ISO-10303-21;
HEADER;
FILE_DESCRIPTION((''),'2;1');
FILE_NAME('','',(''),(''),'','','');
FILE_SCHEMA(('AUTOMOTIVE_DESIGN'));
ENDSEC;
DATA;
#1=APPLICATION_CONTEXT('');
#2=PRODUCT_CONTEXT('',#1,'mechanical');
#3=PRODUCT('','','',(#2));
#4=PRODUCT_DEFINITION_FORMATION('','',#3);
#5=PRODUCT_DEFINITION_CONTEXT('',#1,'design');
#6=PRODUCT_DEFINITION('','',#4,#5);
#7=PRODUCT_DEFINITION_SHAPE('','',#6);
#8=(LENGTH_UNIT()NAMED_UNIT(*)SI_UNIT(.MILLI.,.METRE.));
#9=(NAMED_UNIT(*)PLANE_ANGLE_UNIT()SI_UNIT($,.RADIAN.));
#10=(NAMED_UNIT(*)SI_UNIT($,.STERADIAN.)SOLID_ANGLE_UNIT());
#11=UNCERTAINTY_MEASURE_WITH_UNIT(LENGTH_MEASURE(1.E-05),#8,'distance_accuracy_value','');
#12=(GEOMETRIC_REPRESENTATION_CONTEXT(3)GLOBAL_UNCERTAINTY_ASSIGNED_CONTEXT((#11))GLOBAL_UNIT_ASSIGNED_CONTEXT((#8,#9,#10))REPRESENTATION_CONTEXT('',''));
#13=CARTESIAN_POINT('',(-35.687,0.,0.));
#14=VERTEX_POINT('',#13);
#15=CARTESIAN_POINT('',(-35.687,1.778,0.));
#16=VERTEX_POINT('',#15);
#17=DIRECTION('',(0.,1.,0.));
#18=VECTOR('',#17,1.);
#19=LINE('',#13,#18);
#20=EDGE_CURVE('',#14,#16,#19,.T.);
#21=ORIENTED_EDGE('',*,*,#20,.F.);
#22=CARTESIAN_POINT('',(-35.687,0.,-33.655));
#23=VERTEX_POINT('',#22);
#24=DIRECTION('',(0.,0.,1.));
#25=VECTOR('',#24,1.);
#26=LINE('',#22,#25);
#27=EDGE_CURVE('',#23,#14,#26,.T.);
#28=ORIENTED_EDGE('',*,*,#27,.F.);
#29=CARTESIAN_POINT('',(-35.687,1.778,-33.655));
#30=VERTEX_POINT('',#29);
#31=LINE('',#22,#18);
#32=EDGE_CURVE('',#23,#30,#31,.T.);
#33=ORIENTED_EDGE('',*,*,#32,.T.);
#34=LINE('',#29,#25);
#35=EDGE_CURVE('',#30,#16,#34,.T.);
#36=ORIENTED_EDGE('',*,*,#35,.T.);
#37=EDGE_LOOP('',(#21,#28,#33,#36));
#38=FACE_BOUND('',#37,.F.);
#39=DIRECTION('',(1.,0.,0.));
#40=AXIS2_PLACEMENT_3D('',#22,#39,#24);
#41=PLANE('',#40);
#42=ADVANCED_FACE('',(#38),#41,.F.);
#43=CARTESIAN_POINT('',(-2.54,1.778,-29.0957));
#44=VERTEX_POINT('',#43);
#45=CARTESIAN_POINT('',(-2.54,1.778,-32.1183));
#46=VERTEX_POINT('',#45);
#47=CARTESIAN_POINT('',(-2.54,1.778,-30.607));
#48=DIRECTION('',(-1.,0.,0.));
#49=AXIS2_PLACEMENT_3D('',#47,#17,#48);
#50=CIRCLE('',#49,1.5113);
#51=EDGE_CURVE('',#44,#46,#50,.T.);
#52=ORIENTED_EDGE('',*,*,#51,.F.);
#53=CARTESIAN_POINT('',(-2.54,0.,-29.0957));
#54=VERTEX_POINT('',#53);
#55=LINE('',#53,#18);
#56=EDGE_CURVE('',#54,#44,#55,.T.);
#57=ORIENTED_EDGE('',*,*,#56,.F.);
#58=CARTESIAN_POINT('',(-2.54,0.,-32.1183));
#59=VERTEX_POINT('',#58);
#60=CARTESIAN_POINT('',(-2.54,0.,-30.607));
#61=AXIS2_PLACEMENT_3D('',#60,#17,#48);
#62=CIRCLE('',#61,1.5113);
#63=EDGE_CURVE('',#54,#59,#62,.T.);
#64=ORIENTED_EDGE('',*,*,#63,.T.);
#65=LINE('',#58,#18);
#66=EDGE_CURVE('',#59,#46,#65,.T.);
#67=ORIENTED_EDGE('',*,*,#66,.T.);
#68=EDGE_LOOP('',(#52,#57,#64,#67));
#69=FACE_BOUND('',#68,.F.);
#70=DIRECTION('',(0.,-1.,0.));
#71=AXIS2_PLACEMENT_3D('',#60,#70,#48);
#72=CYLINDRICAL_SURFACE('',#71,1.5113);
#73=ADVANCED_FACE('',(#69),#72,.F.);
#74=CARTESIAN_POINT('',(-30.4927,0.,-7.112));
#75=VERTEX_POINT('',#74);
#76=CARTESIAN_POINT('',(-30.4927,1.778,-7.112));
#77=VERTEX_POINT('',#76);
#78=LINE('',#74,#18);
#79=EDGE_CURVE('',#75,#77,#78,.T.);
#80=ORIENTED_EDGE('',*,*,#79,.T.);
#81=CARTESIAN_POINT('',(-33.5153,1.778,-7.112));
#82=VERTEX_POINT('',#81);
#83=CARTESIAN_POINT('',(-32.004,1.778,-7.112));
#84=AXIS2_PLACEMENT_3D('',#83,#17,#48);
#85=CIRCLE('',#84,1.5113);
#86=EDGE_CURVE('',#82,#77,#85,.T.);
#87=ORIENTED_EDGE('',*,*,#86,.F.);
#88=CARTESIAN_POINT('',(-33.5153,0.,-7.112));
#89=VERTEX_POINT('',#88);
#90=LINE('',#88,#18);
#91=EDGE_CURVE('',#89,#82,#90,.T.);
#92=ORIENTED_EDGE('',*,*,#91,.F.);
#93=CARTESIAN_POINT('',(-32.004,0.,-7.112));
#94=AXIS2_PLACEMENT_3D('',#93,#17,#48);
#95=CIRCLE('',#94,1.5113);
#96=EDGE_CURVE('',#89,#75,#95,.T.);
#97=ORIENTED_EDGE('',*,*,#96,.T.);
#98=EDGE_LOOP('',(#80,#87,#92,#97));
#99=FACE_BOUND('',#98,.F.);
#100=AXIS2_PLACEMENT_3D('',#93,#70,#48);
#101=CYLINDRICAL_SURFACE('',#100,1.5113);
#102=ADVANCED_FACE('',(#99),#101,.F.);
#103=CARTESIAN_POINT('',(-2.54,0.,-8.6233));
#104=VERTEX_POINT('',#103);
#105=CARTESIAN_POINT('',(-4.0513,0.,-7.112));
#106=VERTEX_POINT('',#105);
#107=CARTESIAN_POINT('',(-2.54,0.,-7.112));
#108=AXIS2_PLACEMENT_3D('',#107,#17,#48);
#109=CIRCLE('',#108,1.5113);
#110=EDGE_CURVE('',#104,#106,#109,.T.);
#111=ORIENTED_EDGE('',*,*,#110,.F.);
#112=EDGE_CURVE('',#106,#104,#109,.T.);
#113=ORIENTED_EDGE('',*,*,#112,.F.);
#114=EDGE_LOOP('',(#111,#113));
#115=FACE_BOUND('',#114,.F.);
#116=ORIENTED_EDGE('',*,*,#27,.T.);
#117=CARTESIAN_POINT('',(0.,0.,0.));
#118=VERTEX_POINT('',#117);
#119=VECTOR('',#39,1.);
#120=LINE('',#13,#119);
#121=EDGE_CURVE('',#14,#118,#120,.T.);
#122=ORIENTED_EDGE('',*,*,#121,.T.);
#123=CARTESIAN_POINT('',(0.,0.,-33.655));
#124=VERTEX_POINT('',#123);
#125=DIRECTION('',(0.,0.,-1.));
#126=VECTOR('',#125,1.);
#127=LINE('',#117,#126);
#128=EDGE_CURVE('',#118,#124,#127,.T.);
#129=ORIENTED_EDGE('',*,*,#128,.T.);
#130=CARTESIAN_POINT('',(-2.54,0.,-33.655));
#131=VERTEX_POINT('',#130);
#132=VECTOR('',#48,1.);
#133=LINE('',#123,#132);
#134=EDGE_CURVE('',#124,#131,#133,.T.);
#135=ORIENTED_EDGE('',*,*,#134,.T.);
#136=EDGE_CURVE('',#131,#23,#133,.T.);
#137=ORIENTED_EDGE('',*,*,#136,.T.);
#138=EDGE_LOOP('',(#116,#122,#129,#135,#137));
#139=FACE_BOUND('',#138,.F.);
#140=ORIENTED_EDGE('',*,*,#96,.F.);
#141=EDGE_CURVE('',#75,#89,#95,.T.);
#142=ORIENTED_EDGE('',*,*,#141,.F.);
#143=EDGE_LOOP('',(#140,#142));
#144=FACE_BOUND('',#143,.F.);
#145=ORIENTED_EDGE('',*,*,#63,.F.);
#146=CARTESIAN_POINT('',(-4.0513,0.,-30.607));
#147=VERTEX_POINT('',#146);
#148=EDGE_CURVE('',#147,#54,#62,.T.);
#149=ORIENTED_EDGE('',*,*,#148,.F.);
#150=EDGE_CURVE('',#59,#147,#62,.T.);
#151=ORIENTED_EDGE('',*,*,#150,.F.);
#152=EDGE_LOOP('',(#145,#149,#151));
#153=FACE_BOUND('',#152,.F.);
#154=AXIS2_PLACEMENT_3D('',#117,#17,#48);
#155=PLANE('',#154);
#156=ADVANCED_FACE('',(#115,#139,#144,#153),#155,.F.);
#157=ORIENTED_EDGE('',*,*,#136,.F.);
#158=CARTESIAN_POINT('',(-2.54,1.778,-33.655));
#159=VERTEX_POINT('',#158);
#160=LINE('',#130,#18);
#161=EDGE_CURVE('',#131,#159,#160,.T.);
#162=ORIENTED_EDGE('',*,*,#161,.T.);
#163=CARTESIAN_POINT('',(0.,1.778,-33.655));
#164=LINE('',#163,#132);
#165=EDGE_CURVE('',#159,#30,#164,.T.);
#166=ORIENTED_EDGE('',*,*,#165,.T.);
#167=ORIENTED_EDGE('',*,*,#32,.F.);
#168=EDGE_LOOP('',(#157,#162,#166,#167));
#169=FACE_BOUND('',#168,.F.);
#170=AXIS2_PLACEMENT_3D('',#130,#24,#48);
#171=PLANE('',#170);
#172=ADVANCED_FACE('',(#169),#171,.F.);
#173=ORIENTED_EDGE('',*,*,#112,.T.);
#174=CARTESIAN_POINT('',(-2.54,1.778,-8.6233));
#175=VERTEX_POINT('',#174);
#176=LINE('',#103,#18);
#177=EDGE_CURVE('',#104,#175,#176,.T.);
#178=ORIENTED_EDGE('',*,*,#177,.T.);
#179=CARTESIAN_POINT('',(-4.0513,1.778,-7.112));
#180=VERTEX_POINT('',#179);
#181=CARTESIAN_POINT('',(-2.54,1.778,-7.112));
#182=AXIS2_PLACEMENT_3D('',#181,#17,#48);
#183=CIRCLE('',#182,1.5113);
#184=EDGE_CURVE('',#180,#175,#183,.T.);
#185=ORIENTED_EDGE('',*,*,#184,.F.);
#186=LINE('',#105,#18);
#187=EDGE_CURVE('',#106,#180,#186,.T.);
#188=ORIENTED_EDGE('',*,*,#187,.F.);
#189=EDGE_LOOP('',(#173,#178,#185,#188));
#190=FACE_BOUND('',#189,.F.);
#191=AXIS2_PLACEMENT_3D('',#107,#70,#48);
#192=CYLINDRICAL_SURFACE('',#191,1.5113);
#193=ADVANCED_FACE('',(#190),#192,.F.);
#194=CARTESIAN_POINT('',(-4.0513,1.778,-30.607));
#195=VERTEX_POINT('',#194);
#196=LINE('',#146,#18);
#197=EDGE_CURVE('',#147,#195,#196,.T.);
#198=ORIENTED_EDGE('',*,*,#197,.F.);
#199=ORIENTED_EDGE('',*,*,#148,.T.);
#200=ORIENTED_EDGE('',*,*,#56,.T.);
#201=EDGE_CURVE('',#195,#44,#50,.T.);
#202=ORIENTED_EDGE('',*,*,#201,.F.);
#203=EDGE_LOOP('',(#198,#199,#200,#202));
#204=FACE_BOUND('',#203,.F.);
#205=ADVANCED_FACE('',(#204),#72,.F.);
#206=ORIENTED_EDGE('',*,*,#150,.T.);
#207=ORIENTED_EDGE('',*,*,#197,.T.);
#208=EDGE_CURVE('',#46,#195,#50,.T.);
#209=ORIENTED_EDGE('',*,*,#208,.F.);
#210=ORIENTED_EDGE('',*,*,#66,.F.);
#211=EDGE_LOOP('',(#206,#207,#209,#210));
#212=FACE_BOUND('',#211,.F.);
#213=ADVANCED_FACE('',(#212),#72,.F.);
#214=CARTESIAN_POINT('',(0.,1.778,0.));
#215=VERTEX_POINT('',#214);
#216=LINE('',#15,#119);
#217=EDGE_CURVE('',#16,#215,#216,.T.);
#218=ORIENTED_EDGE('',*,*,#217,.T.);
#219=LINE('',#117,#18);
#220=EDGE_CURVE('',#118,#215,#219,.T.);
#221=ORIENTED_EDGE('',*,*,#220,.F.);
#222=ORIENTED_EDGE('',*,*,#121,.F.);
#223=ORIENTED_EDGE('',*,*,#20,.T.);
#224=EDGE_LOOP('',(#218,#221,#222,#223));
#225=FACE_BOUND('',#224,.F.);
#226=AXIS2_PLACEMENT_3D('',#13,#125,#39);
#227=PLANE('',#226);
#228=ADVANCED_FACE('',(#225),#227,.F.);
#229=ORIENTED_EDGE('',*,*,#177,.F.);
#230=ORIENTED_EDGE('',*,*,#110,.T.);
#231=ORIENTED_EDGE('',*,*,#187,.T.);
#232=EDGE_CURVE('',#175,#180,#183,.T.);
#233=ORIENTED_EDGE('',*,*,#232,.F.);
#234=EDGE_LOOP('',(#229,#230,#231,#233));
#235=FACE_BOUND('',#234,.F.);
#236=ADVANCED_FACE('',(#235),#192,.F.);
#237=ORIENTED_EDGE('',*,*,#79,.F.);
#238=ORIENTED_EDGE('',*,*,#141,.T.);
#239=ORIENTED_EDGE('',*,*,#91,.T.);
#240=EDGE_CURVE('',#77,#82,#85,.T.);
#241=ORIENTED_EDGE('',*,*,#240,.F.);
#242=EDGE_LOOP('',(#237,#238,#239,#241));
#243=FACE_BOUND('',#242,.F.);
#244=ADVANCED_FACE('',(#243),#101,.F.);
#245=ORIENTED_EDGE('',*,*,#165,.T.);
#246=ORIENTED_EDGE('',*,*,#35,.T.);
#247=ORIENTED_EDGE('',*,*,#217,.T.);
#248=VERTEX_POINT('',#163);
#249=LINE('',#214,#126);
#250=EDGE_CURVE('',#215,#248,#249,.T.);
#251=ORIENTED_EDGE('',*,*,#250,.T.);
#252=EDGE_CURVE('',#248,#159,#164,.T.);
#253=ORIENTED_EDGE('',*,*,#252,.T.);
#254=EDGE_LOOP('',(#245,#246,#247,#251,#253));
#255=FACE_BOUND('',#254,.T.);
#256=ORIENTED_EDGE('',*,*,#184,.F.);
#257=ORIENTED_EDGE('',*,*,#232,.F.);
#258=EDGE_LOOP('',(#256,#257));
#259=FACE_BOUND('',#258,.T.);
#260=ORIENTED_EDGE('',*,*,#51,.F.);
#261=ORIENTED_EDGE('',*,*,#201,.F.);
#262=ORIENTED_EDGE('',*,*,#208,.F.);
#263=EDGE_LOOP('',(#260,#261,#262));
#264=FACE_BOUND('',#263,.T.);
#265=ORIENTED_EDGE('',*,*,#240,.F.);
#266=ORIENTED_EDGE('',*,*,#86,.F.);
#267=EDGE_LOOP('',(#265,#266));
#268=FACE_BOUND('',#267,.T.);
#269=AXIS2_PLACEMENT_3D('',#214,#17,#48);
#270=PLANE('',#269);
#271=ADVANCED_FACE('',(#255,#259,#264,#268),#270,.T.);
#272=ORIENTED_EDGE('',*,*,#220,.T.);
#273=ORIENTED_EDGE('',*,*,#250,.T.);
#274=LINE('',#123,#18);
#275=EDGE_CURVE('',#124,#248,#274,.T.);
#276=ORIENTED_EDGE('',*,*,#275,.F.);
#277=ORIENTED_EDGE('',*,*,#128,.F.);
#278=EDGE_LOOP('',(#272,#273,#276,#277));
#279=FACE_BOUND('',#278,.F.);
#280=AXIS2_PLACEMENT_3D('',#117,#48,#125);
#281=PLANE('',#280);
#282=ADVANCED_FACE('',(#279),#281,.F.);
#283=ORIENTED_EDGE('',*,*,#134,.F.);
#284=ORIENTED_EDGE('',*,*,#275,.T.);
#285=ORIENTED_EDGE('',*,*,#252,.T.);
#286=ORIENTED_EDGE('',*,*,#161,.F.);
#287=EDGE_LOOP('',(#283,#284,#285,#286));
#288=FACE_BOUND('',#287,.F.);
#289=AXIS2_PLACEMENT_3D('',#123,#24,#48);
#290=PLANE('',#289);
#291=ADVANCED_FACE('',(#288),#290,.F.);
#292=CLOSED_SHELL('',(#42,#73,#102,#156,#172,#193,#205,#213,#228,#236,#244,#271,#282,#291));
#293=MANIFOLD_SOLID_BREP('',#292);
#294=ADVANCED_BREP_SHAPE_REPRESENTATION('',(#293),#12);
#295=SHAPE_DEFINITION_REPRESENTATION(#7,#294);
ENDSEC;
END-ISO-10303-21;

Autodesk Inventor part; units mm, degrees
ref_plane "YZ Plane" through (0, 0, 0) normal (1, 0, 0) x (0, 1, 0)
ref_plane "XZ Plane" through (0, 0, 0) normal (0, 1, 0) x (-1, 0, 0)
ref_plane "XY Plane" through (0, 0, 0) normal (0, 0, 1) x (1, 0, 0)
sketch "Sketch1" plane through (0, 0, 0) normal (0, 1, 0) x (-1, 0, 0)
  line L0 (0, 0) -> (0, -33.655)
  line L1 (0, -33.655) -> (35.687, -33.655)
  line L2 (35.687, -33.655) -> (35.687, 0)
  line L3 (35.687, 0) -> (0, 0)
  line L4 (0, -33.655) -> (2.54, -33.655)
  line L5 (2.54, -33.655) -> (2.54, -30.607)
  circle A0 centre (2.54, -30.607) radius 1.5113
  line L6 (2.54, -30.607) -> (2.54, -7.112)
  circle A1 centre (2.54, -7.112) radius 1.5113
  line L7 (2.54, -7.112) -> (32.004, -7.112)
  circle A2 centre (32.004, -7.112) radius 1.5113
  dimension "d15" = 33.655
  dimension "d16" = 35.687
  dimension "d17" = 2.54
  dimension "d18" = 3.048
  dimension "d19" = 3.0226
  dimension "d20" = 23.495
  dimension "d21" = 29.464
  dimension "d22" = 3.0226
extrude "Extrusion2" add sketch "Sketch1" along normal blind 1.778
properties part number "PCB_model_2"
